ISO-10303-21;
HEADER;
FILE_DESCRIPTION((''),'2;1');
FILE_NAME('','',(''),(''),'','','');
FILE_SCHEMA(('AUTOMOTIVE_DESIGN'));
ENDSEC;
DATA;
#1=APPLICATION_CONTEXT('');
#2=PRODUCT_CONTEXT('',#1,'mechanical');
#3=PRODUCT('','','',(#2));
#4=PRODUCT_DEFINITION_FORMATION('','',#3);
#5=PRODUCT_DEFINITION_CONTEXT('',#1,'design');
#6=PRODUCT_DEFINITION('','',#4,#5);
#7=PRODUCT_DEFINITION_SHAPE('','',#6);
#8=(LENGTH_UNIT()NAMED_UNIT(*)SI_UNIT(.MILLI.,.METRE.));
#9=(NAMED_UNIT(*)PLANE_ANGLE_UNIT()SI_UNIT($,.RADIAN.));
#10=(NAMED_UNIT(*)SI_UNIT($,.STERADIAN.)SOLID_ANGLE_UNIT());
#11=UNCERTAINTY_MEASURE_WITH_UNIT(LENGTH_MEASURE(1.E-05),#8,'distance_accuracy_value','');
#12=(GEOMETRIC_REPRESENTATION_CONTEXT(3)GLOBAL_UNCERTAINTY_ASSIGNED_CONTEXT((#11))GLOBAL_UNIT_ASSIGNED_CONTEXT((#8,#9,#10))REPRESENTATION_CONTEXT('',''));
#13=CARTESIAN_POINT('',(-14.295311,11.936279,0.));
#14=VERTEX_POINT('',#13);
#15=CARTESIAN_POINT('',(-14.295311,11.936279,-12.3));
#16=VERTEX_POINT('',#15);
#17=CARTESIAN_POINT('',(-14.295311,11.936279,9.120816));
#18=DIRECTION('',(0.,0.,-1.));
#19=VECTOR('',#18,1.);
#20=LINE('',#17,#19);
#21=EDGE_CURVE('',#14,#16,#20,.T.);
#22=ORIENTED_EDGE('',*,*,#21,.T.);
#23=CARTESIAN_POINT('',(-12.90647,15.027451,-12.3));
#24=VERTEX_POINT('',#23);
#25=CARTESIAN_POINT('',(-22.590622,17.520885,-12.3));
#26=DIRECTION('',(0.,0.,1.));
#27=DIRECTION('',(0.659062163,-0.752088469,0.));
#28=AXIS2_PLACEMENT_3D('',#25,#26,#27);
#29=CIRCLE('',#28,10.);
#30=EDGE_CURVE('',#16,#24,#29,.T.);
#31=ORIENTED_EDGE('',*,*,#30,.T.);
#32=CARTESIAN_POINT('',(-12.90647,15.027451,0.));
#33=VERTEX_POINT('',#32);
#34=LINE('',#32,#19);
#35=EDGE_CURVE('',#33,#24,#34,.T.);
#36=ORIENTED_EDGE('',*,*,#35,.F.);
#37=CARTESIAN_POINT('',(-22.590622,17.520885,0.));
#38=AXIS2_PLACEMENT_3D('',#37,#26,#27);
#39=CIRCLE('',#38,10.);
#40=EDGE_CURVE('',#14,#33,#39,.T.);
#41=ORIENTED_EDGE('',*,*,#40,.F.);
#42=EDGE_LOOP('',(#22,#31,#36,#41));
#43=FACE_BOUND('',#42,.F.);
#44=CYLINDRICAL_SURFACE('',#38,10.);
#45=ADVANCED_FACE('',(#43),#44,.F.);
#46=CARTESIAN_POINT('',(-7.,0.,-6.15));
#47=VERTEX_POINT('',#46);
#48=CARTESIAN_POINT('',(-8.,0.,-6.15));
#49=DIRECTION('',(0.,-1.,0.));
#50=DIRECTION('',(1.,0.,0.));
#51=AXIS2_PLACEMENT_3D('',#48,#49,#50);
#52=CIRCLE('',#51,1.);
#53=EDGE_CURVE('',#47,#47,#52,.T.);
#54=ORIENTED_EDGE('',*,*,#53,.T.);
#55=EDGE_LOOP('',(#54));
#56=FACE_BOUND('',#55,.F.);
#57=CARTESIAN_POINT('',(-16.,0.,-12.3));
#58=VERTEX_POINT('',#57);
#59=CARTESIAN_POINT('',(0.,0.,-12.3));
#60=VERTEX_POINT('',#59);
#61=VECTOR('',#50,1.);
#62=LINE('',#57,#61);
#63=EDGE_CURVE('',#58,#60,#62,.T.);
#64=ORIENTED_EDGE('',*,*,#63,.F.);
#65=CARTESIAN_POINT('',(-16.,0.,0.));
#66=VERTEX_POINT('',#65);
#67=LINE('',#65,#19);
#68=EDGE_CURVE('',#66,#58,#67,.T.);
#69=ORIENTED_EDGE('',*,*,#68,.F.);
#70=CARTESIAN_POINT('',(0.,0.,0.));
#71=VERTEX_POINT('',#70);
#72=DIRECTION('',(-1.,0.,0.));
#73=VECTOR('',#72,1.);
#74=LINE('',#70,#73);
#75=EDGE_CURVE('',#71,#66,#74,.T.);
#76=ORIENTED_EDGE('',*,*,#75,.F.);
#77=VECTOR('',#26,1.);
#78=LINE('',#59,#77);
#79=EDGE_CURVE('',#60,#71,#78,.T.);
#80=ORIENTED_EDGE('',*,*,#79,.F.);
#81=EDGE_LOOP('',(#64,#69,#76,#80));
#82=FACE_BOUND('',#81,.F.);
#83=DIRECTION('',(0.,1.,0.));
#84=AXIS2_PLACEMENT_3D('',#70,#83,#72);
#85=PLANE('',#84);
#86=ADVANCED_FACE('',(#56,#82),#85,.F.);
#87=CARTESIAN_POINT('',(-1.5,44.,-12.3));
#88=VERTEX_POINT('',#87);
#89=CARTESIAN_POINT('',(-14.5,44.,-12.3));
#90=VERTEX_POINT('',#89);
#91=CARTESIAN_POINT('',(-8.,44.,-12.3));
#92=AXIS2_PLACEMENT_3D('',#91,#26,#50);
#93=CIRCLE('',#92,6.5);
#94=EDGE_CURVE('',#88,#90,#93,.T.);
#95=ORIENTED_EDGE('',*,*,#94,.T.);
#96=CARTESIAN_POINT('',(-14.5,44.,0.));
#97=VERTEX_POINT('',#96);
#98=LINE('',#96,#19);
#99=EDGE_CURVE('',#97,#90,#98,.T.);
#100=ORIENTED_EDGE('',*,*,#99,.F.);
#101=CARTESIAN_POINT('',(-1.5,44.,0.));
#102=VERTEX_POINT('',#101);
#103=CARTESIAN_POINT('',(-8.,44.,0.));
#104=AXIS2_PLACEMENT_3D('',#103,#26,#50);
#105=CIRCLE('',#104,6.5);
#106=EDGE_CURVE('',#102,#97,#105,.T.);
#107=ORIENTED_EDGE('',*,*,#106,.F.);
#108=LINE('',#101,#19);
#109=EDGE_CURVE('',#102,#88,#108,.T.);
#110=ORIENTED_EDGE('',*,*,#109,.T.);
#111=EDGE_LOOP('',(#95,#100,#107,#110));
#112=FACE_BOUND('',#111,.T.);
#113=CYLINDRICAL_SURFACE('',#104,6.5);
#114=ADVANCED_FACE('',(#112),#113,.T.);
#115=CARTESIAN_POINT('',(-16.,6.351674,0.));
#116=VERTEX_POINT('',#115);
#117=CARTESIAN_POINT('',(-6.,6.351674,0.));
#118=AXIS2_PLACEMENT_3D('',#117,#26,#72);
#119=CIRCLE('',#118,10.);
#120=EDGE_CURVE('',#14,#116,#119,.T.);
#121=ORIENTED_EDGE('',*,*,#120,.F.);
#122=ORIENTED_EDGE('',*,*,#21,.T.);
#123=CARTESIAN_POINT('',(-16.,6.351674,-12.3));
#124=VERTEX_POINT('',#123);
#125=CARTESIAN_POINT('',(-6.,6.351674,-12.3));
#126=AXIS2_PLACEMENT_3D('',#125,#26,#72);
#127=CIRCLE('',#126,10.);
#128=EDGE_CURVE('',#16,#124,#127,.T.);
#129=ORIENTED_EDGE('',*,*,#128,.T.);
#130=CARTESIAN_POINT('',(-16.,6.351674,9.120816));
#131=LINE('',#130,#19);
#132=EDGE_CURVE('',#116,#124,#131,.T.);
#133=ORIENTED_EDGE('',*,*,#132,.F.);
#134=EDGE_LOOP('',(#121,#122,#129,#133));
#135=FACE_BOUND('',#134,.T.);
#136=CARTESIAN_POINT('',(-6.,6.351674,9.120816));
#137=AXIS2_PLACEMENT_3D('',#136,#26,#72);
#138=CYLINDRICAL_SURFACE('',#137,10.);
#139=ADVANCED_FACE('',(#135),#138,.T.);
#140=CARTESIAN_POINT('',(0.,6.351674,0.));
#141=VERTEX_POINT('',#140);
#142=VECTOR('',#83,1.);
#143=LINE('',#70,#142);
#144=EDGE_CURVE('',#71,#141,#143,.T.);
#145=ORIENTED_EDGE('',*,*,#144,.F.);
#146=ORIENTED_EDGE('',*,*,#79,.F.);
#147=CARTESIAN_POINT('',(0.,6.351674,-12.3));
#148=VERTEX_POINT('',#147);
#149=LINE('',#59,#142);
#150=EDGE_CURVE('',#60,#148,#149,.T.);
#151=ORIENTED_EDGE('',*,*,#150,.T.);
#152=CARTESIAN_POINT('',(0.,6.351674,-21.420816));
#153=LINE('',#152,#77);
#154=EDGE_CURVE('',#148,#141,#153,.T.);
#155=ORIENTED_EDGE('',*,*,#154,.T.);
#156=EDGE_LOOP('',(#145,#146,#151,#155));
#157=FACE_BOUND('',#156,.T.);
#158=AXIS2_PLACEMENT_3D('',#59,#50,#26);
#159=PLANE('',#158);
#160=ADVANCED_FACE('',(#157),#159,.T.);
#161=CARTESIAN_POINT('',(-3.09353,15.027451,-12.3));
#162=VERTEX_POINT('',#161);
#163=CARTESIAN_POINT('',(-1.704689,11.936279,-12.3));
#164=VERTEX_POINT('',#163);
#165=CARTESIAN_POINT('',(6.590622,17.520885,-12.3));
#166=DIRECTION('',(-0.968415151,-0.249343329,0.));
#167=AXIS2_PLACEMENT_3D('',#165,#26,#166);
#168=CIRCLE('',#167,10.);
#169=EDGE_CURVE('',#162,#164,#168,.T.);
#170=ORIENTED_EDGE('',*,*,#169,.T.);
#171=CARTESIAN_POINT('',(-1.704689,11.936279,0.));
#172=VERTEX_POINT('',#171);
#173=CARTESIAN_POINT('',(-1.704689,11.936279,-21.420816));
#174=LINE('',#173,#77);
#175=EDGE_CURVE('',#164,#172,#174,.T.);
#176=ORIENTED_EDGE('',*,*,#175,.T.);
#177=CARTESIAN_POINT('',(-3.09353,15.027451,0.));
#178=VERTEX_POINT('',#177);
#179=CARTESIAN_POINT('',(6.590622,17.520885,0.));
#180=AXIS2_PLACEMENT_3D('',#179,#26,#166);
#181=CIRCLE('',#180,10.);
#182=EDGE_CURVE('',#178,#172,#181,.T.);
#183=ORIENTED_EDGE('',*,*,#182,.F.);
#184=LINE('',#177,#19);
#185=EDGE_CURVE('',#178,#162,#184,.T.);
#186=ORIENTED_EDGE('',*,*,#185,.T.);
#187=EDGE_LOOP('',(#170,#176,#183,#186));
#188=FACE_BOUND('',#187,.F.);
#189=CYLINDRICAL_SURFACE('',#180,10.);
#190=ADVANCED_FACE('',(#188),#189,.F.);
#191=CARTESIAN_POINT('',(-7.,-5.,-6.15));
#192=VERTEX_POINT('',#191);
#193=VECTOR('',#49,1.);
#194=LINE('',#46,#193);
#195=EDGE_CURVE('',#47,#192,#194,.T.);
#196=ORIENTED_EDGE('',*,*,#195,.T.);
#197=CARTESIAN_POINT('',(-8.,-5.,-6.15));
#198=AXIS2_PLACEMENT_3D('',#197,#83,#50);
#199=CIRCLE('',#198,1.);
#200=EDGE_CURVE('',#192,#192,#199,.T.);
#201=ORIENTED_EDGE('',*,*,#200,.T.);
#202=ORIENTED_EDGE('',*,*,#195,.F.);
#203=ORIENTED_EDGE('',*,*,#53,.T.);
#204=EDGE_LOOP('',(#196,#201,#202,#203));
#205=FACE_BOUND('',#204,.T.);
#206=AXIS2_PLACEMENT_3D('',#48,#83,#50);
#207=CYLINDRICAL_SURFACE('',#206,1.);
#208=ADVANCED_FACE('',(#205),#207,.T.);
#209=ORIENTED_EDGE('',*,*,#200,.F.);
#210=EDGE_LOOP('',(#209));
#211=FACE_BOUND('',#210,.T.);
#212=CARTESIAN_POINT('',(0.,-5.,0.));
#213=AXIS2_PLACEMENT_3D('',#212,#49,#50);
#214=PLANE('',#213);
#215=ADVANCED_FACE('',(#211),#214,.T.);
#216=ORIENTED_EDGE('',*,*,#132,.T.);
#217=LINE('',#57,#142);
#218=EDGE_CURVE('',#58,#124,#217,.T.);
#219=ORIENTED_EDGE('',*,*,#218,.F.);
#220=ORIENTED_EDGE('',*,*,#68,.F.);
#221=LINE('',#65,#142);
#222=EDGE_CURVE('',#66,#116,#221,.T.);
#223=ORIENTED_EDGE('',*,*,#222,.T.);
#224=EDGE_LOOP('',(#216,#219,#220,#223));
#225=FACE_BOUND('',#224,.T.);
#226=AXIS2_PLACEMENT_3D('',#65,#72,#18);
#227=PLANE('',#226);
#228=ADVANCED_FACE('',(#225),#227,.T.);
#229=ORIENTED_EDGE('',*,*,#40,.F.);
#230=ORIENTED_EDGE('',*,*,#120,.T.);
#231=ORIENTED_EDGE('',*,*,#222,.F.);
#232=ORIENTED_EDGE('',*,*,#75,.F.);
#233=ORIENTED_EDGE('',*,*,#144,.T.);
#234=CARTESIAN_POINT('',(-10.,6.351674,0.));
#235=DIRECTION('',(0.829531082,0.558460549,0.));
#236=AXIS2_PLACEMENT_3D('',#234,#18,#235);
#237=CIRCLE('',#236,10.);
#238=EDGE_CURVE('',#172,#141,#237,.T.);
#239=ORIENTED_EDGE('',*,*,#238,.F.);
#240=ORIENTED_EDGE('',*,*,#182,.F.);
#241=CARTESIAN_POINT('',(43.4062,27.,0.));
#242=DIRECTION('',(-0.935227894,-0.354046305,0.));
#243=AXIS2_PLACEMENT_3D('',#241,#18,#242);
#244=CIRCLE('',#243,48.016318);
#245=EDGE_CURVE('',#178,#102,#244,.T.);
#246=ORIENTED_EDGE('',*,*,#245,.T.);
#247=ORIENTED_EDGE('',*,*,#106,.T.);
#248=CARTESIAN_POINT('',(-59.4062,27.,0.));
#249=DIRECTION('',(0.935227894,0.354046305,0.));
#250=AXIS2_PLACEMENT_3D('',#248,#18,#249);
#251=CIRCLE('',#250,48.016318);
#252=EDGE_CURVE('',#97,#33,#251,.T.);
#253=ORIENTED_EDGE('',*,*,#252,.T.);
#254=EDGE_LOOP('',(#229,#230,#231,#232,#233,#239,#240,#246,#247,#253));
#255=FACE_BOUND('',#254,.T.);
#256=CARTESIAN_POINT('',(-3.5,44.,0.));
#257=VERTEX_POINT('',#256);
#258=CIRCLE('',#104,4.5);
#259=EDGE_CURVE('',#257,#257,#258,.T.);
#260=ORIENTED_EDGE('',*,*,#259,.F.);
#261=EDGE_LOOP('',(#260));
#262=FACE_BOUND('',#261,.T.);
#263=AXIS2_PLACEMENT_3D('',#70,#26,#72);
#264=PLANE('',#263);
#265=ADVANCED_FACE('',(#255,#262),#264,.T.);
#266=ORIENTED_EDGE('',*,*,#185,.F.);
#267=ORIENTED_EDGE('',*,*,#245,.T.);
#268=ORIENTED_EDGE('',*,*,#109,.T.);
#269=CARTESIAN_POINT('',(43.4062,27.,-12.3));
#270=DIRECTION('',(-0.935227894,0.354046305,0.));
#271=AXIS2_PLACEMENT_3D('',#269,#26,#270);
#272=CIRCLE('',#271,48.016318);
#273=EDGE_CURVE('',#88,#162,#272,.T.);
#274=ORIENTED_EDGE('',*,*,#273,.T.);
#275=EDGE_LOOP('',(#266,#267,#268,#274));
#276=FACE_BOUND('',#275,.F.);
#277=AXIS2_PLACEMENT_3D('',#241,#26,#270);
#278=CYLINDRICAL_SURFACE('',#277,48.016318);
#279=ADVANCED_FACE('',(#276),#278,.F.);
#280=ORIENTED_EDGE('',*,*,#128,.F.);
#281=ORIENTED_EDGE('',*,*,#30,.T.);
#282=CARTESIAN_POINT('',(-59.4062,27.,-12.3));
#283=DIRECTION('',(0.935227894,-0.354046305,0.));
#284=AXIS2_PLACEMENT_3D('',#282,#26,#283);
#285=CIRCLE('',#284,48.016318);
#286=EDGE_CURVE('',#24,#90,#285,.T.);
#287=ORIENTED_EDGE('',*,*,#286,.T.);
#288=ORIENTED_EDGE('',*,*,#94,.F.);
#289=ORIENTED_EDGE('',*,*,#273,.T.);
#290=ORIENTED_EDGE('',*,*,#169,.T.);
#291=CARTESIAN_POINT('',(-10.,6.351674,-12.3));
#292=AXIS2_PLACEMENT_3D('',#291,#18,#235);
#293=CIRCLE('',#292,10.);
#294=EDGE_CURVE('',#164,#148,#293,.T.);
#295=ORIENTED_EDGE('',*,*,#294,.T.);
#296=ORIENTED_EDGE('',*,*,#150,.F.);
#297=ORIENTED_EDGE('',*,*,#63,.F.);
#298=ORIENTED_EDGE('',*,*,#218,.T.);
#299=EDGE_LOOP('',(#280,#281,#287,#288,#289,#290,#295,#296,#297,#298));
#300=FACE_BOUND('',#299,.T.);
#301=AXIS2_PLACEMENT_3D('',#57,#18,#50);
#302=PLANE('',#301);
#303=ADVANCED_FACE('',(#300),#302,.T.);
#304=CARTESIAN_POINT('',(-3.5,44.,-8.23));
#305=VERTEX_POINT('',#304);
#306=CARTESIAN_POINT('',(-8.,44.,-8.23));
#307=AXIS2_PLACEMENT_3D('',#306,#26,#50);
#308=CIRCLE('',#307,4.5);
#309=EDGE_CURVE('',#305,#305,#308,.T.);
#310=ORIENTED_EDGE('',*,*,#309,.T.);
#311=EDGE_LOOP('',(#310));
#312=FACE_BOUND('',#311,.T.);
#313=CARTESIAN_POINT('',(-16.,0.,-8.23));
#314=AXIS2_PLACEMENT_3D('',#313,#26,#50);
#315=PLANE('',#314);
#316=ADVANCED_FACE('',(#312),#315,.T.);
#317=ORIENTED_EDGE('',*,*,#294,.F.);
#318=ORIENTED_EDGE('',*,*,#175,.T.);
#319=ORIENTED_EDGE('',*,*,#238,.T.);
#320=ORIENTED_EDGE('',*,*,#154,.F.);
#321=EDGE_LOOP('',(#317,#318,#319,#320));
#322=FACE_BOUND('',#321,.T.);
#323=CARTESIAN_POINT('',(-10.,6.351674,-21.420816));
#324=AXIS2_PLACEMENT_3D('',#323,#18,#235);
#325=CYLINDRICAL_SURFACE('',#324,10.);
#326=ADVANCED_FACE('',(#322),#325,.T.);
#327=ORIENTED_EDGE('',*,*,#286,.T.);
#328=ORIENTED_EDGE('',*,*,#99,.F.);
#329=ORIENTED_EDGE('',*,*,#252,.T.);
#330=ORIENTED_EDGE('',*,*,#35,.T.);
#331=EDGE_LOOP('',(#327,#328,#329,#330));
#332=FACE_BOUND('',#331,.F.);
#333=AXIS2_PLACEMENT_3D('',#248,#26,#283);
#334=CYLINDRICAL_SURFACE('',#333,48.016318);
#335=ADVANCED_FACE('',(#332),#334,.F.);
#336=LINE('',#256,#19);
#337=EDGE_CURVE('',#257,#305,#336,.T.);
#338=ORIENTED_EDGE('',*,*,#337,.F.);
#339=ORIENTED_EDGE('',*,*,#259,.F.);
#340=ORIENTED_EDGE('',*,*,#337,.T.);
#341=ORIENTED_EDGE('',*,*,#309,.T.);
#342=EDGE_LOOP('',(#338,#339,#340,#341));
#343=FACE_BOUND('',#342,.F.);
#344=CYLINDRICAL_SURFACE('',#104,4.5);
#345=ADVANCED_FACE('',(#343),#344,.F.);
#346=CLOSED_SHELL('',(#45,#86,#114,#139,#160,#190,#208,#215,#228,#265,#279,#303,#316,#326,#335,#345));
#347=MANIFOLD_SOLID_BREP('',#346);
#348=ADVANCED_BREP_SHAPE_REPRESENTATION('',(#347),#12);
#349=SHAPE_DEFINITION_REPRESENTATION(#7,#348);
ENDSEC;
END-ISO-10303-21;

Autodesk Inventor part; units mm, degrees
ref_plane "YZ Plane" through (0, 0, 0) normal (1, 0, 0) x (0, 1, 0)
ref_plane "XZ Plane" through (0, 0, 0) normal (0, 1, 0) x (-1, 0, 0)
ref_plane "XY Plane" through (0, 0, 0) normal (0, 0, 1) x (1, 0, 0)
sketch "Sketch1" plane through (0, 0, 0) normal (0, 1, 0) x (-1, 0, 0)
  line L0 (0, 0) -> (16, 0)
  line L1 (16, 0) -> (16, -12.3)
  line L2 (16, -12.3) -> (0, -12.3)
  line L3 (0, -12.3) -> (0, 0)
  dimension "d0" = 16
  dimension "d1" = 12.3
extrude "Extrusion1" add sketch "Sketch1" along normal blind 10
sketch "Sketch2" plane through (0, 10, 0) normal (0, 1, 0) x (1, 0, 0)
  line L0 (-16, 0) -> (0, 0) projected
  line L1 (-8, 0) -> (-8, 12.3)
  line L2 (0, 12.3) -> (-16, 12.3) projected
  line L3 (-14.5, 0) -> (-14.5, 12.3)
  line L4 (-1.5, 0) -> (-1.5, 12.3)
  dimension "d4" = 6.5
  dimension "d5" = 6.5
extrude "Extrusion2" add sketch "Sketch2" along normal blind 40.5
sketch "Sketch3" plane through (-16, 0, 0) normal (0, 0, 1) x (1, 0, 0)
  line L0 (14.5, 50.5) -> (1.5, 50.5) projected
  line L1 (8, 50.5) -> (8, 0)
  line L2 (0, 0) -> (16, 0) projected
  circle A0 centre (8, 44) radius 4.5
  line L3 (1.5, 50.5) -> (14.5, 50.5) projected
  circle A1 centre (8, 44) radius 6.5
  line L4 (14.5, 10) -> (14.5, 50.5) projected
  line L5 (14.5, 30.25) -> (1.5, 30.25)
  line L6 (1.5, 10) -> (1.5, 50.5) projected
  line L7 (8, 30.25) -> (11.5, 30.25)
  arc A2 (14.5, 44) -> (14.5, 10) centre (59.4062, 27) ccw
  line L8 (8, 30.25) -> (4.5, 30.25)
  arc A3 (1.5, 10) -> (1.5, 44) centre (-43.4062, 27) ccw
  dimension "d8" = 6.5
  dimension "d9" = 9
  dimension "d10" = 13
  dimension "d11" = 3.5
  dimension "d12" = 3.5
extrude "Extrusion3" cut sketch "Sketch3" against normal blind 13.5 contours L4 A1 L0 | A1 L6 L0 | L4 L5 A2 A1 | A1 A2 | A3 A1 | A1 A3 L5 L6 | L4 A2 L5 | L5 A3 L6
fillet "Fillet1" radius 10 4 edges at (0, 10, -6.15) (-1.5, 10, -6.15) (-14.5, 10, -6.15) (-16, 10, -6.15)
sketch "Sketch4" plane through (-16, 0, 0) normal (0, 0, 1) x (1, 0, 0)
  arc A0 (14.5, 44) -> (1.5, 44) centre (8, 44) ccw projected
  circle A1 centre (8, 44) radius 4.5
  point P0 (16, 0)
  dimension "d16" = 9
extrude "Extrusion4" cut sketch "Sketch4" against normal blind 8.23
sketch "Sketch5" plane through (0, 0, 0) normal (0, -1, 0) x (1, 0, 0)
  line L0 (-16, 0) -> (0, 0) projected
  line L1 (-8, 0) -> (-8, -12.3)
  line L2 (0, -12.3) -> (-16, -12.3) projected
  circle A0 centre (-8, -6.15) radius 1
extrude "Extrusion5" add sketch "Sketch5" along normal blind 5
properties part number "pawn"
